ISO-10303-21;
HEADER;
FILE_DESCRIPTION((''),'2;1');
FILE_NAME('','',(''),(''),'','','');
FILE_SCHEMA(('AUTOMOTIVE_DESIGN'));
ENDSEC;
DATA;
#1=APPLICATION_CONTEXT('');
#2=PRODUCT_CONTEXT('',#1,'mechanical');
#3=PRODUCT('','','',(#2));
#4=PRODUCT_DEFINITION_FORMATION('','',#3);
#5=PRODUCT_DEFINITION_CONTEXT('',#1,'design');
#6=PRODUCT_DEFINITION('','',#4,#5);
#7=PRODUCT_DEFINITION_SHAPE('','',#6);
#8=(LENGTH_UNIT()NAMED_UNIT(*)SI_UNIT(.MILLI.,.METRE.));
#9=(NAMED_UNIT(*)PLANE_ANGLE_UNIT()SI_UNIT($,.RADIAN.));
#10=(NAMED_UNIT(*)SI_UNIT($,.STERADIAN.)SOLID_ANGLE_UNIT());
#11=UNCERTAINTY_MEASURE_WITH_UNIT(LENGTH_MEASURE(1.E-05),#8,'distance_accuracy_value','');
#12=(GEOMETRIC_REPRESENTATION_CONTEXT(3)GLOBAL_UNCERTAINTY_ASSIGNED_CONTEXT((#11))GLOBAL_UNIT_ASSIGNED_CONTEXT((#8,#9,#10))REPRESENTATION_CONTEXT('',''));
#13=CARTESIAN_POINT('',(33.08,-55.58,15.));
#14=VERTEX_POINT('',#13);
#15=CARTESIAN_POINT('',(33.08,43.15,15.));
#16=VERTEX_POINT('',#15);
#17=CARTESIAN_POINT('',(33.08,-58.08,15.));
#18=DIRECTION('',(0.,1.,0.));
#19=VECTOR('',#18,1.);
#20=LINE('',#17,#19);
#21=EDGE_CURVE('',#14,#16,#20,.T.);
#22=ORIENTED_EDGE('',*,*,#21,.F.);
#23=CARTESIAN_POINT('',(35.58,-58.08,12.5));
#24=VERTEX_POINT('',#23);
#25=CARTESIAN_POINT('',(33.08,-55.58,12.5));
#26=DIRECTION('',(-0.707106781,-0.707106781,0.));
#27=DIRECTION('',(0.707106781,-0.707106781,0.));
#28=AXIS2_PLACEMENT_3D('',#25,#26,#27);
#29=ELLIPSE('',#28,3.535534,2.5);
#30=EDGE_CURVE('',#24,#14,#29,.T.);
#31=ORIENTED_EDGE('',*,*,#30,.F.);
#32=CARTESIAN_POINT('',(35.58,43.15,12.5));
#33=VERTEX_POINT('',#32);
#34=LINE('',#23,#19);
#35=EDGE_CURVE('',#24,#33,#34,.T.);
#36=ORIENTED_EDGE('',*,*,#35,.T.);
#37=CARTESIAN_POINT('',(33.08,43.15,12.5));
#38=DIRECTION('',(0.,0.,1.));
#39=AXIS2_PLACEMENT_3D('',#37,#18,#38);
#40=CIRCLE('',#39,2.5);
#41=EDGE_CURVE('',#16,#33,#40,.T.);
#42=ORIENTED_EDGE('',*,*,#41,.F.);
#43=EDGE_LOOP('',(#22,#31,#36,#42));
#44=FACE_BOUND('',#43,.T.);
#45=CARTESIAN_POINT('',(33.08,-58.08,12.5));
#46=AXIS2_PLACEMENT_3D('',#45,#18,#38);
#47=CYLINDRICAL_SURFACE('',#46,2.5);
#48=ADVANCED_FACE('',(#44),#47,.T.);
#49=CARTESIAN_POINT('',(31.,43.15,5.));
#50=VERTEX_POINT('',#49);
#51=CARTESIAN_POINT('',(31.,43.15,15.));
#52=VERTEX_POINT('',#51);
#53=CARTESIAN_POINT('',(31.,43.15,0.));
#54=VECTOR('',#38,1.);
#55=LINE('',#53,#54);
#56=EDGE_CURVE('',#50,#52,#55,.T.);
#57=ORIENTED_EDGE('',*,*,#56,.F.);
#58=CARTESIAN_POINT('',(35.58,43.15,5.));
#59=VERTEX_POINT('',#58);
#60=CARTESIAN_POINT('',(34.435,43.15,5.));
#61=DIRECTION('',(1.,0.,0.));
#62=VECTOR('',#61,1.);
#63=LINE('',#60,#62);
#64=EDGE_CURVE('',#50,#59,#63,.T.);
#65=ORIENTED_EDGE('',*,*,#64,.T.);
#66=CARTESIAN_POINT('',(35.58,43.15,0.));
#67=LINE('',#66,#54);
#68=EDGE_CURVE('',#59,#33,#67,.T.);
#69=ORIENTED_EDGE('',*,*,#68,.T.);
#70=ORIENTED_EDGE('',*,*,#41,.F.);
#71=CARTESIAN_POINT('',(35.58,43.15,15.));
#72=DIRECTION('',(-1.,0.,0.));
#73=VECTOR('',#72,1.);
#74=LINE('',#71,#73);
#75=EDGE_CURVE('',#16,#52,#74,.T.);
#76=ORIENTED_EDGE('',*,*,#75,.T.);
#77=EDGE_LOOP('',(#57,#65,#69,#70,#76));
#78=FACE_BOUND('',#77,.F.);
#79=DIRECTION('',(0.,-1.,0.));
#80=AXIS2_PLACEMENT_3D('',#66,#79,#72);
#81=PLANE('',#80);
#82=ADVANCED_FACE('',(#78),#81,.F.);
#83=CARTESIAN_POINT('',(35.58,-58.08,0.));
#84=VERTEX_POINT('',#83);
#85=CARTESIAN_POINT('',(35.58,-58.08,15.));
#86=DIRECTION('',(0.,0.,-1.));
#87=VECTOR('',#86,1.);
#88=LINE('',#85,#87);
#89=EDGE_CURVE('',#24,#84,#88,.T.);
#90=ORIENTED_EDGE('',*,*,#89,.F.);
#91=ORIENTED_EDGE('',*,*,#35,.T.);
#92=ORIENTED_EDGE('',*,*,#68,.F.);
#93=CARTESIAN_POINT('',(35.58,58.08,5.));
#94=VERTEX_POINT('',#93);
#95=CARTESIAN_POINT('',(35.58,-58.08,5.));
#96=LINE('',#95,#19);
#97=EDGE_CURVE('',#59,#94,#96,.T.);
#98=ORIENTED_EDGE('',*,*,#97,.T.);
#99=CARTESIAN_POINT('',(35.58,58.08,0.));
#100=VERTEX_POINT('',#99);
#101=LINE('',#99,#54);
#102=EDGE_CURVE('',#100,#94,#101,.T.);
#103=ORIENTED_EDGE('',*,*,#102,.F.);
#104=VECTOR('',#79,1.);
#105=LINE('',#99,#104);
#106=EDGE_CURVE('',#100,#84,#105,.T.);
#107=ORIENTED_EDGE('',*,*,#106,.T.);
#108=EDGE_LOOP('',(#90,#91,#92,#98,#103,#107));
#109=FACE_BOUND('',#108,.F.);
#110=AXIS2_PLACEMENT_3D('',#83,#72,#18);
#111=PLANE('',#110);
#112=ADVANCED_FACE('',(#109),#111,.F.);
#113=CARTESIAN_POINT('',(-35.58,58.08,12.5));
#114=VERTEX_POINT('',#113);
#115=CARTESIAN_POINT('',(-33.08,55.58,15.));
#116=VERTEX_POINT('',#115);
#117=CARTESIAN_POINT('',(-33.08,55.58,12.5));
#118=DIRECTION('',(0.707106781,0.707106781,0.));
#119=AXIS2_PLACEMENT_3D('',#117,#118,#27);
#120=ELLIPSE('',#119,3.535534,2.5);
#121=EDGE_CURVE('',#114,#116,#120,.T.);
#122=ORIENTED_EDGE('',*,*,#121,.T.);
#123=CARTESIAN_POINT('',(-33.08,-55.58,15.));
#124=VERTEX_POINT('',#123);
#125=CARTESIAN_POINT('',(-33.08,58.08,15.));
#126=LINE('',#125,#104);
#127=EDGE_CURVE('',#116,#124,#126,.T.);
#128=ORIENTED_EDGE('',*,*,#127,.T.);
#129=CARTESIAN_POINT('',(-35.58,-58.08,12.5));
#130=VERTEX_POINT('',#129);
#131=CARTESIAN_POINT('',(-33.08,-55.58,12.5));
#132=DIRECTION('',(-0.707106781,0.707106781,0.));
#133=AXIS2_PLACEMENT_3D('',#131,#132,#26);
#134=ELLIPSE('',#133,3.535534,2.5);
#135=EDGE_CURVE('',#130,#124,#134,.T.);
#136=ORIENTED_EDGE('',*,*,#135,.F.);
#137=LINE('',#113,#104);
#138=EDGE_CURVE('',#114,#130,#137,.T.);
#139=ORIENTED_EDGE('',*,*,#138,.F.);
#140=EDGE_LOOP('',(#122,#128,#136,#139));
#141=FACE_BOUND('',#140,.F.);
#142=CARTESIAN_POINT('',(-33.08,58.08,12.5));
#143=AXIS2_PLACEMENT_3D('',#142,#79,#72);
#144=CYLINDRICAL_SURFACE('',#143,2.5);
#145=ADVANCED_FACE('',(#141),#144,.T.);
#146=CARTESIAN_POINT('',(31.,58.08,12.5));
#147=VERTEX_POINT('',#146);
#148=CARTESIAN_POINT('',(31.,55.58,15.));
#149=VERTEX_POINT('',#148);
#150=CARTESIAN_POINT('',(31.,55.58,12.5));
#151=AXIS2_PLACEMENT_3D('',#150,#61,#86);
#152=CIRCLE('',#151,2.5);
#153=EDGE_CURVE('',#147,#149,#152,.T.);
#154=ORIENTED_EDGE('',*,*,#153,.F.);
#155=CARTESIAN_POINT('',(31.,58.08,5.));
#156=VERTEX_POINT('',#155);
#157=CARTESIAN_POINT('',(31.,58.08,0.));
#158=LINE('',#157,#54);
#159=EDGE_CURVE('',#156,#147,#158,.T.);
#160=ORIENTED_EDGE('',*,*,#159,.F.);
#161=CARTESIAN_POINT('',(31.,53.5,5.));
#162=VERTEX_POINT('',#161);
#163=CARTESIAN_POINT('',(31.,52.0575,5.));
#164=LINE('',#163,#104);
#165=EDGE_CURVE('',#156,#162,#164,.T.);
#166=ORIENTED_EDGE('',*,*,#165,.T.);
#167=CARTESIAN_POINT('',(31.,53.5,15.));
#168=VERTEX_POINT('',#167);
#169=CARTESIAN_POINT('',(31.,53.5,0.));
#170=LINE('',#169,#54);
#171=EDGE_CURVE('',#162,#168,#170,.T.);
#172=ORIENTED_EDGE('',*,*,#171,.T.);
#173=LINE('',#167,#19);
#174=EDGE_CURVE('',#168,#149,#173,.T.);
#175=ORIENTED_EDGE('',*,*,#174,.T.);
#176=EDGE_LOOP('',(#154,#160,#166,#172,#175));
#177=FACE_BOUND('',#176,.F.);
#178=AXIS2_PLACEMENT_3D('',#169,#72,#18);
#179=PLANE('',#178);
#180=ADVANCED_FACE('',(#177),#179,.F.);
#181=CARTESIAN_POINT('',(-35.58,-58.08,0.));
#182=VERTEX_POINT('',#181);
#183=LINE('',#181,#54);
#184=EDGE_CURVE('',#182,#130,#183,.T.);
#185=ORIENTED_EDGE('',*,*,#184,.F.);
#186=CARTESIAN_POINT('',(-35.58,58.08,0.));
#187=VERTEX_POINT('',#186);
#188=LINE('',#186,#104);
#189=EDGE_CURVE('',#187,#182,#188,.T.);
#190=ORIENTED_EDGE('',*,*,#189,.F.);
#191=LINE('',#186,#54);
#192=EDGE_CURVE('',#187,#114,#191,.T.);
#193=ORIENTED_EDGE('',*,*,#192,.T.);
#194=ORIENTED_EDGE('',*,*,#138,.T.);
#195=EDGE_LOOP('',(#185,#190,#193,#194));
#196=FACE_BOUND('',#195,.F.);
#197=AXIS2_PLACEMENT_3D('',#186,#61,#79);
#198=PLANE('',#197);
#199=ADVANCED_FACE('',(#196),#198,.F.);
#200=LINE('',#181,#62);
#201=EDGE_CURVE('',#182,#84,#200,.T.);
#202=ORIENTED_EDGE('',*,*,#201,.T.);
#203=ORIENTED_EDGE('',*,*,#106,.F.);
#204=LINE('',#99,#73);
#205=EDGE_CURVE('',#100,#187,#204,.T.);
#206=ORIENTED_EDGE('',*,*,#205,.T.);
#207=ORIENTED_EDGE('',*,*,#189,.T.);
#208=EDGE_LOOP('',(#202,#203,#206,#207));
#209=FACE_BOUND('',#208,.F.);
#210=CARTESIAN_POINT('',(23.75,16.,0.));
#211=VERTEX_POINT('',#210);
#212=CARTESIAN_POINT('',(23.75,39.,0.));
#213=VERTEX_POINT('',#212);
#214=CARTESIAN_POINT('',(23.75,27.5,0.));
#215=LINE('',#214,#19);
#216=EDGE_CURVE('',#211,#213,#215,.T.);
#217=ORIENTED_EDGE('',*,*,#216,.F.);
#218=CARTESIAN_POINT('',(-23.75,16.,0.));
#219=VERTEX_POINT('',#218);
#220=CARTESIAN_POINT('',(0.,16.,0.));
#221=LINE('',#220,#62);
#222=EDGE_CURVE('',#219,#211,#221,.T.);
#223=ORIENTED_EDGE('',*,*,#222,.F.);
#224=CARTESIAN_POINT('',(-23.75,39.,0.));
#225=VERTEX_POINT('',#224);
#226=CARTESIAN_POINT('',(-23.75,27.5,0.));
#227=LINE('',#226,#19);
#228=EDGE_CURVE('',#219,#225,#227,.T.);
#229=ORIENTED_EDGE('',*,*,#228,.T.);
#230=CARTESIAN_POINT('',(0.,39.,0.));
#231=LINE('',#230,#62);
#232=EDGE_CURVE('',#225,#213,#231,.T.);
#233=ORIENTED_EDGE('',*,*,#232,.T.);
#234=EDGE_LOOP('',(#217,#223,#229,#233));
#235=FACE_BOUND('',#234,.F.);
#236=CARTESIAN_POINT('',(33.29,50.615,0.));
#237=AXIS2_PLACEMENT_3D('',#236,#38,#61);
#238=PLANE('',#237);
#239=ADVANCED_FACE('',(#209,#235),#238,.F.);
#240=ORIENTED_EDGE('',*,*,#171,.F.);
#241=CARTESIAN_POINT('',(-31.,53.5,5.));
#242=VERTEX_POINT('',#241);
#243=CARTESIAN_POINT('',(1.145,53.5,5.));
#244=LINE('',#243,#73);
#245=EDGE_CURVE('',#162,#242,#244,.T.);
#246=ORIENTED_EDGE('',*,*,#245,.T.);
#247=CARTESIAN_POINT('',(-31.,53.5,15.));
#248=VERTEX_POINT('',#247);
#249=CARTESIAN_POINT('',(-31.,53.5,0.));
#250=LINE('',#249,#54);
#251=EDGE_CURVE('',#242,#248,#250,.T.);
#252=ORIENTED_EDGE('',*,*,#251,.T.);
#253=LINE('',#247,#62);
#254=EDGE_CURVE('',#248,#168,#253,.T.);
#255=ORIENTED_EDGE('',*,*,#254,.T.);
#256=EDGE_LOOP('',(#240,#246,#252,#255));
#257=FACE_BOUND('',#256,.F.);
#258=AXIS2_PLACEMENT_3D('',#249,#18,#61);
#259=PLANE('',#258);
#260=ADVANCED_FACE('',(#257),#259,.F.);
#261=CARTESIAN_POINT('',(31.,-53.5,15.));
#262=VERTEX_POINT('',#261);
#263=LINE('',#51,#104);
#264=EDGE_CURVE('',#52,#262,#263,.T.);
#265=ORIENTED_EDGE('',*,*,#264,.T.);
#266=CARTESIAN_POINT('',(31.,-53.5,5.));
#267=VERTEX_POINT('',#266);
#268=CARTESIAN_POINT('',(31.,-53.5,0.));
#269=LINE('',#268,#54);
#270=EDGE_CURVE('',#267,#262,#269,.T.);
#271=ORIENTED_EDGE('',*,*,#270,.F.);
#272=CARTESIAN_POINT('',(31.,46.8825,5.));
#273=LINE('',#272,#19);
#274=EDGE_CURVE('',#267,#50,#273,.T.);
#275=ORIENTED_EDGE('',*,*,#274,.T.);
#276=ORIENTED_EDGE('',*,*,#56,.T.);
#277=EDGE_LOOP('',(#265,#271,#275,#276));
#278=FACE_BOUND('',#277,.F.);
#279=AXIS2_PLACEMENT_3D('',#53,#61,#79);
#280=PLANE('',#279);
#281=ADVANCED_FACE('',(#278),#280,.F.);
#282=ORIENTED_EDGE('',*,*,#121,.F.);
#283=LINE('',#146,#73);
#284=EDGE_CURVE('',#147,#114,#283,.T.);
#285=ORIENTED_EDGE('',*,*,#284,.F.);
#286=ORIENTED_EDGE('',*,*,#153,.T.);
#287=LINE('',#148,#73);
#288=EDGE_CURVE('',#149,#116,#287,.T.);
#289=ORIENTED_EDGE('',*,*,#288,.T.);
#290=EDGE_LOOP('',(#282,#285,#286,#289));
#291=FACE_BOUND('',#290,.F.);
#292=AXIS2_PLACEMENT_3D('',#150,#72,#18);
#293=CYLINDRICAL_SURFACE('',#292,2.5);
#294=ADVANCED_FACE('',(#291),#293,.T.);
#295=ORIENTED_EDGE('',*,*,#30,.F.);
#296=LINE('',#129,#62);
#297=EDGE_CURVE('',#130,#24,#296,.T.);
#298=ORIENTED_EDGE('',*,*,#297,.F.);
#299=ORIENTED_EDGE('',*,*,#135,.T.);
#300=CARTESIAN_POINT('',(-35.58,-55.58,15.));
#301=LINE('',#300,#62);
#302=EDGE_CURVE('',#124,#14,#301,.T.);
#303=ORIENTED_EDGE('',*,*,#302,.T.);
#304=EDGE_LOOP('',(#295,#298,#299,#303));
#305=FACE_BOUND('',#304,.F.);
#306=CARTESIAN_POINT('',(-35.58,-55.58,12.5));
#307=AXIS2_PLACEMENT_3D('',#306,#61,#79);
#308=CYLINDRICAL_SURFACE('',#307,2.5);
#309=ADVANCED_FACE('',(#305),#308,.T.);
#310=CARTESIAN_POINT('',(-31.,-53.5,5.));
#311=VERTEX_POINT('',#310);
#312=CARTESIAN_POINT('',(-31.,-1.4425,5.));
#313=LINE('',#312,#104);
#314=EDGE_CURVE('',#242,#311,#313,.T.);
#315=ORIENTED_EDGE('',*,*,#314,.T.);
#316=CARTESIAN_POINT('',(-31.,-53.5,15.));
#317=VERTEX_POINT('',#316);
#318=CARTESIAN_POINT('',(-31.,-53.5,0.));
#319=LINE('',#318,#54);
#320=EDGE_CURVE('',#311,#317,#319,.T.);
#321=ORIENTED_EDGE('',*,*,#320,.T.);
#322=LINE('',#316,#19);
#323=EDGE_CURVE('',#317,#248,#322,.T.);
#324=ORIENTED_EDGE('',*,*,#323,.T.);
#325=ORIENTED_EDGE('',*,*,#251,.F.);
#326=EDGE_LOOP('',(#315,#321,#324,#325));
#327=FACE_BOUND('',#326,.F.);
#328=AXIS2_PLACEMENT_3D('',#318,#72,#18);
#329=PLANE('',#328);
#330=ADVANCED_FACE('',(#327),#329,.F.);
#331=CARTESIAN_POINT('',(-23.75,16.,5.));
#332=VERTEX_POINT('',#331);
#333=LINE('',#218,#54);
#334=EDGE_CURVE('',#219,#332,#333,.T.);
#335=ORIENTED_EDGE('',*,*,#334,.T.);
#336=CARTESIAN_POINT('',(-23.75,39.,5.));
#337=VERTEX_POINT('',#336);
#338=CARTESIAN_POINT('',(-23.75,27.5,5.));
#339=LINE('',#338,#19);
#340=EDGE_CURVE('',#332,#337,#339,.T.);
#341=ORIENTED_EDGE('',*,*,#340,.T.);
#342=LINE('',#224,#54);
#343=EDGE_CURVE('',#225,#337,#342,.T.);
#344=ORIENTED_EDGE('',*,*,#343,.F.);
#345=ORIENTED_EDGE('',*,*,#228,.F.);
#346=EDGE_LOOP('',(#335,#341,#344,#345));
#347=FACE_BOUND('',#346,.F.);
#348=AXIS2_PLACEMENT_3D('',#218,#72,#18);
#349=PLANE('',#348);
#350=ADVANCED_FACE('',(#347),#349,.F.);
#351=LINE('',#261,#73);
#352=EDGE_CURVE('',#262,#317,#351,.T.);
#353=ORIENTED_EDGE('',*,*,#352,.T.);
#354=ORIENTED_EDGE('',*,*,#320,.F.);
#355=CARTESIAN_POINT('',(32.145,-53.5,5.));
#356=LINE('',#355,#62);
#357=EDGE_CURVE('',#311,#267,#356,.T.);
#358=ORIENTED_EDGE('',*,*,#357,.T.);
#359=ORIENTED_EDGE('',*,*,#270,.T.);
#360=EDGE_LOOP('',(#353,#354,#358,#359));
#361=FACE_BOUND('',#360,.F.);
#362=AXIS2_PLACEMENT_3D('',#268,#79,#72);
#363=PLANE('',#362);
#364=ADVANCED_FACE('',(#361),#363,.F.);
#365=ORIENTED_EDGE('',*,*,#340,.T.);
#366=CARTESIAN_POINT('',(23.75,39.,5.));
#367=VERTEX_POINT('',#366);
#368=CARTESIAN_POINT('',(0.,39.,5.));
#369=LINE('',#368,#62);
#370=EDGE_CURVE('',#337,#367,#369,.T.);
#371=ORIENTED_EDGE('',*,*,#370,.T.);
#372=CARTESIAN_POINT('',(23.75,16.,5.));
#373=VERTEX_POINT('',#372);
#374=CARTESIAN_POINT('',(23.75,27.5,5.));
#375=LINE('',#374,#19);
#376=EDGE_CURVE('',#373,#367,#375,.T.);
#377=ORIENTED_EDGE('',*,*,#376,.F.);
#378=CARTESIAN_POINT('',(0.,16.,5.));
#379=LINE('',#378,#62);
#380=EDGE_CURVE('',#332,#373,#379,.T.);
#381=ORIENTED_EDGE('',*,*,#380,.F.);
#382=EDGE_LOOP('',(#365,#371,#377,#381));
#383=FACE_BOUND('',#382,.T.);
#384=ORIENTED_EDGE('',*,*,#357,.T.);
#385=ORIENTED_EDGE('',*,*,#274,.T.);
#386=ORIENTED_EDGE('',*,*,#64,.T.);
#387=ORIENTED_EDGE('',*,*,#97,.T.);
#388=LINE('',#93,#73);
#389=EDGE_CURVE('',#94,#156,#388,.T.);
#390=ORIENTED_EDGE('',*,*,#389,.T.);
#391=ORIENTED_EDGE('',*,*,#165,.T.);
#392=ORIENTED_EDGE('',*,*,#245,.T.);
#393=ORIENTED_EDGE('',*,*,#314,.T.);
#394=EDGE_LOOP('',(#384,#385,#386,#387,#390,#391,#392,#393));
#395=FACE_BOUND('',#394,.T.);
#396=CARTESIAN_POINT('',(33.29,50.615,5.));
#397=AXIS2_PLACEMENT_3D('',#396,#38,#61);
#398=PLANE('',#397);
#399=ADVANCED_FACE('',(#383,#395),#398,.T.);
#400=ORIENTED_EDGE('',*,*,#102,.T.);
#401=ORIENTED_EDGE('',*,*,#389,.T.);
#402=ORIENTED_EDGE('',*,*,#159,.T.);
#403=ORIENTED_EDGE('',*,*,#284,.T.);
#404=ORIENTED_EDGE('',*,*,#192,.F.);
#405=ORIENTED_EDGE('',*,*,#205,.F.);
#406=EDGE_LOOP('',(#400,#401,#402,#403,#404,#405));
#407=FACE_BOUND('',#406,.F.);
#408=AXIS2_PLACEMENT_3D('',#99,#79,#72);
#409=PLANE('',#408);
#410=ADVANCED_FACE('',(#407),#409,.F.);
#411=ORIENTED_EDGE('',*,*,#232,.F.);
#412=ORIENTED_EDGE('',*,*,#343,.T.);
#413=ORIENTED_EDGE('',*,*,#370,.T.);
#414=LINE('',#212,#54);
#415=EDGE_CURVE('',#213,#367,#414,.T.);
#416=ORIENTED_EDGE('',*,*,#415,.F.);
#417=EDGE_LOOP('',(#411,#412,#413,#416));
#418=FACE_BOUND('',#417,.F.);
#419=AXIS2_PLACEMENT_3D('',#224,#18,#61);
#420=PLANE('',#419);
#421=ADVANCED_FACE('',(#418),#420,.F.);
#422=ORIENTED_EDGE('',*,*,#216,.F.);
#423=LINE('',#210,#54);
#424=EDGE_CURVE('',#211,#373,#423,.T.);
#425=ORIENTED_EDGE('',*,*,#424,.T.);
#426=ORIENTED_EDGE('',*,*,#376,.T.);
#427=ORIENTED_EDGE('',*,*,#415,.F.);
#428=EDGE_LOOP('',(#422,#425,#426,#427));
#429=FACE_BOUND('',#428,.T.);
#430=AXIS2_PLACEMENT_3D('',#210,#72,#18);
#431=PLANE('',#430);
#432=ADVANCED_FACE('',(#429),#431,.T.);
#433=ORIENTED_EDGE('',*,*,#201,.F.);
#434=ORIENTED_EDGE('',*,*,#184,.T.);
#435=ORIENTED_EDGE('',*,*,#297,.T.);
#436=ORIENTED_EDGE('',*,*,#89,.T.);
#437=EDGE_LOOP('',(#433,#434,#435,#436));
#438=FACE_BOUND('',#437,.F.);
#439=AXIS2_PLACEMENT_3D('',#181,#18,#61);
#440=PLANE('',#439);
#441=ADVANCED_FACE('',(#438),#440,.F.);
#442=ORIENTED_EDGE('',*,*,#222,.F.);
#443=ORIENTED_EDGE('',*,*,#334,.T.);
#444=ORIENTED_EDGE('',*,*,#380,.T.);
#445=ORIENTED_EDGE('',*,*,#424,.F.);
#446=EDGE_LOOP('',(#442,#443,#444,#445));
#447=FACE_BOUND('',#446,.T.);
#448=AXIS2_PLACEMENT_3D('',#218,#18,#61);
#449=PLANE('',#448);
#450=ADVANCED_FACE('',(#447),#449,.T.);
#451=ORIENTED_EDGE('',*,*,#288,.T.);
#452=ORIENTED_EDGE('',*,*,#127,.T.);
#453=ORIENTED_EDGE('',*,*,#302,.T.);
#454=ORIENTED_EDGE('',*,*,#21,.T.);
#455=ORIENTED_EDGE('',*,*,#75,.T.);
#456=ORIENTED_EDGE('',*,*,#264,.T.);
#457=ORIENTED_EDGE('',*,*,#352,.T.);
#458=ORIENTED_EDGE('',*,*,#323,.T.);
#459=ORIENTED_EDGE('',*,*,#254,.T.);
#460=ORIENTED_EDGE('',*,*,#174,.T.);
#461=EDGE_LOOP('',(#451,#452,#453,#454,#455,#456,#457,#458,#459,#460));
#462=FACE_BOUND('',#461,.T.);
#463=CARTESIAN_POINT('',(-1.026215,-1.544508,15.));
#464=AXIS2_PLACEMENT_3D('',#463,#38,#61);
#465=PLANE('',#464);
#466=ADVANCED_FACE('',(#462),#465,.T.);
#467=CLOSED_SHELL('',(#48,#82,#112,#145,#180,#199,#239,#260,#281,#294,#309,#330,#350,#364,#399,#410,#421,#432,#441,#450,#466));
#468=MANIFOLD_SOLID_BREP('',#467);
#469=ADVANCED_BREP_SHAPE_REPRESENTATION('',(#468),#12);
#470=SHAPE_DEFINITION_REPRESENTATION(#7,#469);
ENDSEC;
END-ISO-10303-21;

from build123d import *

# Parameters (mm, degrees)
F0_W     = 47.5
F0_H     = 23
F1_DEPTH = 5
F2_DEPTH = 15
F3_R     = 2.5


with BuildPart() as f1:
    # F0 (on Top) → F1 (new body)
    with BuildSketch(Plane.XY):
        Polygon((35.5799995661, 43.7052872479), (35.5799995661, 58.0799995661), (31, 58.0799995661), (31, 53.5), (31, 43.15), (35.5799995661, 43.15), align=None)
        Polygon((31, 53.5), (31, 58.0799995661), (-35.5799995661, 58.0799995661), (-35.5799995661, -58.0799995661), (35.5799995661, -58.0799995661), (35.5799995661, 43.15), (31, 43.15), (31, -53.5), (-31, -53.5), (-31, 53.5), align=None)
        Polygon((31, 43.15), (31, 53.5), (-31, 53.5), (-31, -53.5), (31, -53.5), align=None)
        with Locations((0, 27.5)):
            Rectangle(F0_W, F0_H, mode=Mode.SUBTRACT)
    extrude(amount=F1_DEPTH)

    # F0 (on Top) → F2 (join)
    with BuildSketch(Plane.XY):
        Polygon((31, 53.5), (31, 58.0799995661), (-35.5799995661, 58.0799995661), (-35.5799995661, -58.0799995661), (35.5799995661, -58.0799995661), (35.5799995661, 43.15), (31, 43.15), (31, -53.5), (-31, -53.5), (-31, 53.5), align=None)
    extrude(amount=F2_DEPTH)

    # F3
    f3_edges = [f1.edges().sort_by_distance(p)[0] for p in [
        (-35.58, 0, 15),
        (-2.29, 58.08, 15),
        (0, -58.08, 15),
        (35.58, -7.465, 15),
    ]]
    fillet(f3_edges, radius=F3_R)


solid = f1.part
